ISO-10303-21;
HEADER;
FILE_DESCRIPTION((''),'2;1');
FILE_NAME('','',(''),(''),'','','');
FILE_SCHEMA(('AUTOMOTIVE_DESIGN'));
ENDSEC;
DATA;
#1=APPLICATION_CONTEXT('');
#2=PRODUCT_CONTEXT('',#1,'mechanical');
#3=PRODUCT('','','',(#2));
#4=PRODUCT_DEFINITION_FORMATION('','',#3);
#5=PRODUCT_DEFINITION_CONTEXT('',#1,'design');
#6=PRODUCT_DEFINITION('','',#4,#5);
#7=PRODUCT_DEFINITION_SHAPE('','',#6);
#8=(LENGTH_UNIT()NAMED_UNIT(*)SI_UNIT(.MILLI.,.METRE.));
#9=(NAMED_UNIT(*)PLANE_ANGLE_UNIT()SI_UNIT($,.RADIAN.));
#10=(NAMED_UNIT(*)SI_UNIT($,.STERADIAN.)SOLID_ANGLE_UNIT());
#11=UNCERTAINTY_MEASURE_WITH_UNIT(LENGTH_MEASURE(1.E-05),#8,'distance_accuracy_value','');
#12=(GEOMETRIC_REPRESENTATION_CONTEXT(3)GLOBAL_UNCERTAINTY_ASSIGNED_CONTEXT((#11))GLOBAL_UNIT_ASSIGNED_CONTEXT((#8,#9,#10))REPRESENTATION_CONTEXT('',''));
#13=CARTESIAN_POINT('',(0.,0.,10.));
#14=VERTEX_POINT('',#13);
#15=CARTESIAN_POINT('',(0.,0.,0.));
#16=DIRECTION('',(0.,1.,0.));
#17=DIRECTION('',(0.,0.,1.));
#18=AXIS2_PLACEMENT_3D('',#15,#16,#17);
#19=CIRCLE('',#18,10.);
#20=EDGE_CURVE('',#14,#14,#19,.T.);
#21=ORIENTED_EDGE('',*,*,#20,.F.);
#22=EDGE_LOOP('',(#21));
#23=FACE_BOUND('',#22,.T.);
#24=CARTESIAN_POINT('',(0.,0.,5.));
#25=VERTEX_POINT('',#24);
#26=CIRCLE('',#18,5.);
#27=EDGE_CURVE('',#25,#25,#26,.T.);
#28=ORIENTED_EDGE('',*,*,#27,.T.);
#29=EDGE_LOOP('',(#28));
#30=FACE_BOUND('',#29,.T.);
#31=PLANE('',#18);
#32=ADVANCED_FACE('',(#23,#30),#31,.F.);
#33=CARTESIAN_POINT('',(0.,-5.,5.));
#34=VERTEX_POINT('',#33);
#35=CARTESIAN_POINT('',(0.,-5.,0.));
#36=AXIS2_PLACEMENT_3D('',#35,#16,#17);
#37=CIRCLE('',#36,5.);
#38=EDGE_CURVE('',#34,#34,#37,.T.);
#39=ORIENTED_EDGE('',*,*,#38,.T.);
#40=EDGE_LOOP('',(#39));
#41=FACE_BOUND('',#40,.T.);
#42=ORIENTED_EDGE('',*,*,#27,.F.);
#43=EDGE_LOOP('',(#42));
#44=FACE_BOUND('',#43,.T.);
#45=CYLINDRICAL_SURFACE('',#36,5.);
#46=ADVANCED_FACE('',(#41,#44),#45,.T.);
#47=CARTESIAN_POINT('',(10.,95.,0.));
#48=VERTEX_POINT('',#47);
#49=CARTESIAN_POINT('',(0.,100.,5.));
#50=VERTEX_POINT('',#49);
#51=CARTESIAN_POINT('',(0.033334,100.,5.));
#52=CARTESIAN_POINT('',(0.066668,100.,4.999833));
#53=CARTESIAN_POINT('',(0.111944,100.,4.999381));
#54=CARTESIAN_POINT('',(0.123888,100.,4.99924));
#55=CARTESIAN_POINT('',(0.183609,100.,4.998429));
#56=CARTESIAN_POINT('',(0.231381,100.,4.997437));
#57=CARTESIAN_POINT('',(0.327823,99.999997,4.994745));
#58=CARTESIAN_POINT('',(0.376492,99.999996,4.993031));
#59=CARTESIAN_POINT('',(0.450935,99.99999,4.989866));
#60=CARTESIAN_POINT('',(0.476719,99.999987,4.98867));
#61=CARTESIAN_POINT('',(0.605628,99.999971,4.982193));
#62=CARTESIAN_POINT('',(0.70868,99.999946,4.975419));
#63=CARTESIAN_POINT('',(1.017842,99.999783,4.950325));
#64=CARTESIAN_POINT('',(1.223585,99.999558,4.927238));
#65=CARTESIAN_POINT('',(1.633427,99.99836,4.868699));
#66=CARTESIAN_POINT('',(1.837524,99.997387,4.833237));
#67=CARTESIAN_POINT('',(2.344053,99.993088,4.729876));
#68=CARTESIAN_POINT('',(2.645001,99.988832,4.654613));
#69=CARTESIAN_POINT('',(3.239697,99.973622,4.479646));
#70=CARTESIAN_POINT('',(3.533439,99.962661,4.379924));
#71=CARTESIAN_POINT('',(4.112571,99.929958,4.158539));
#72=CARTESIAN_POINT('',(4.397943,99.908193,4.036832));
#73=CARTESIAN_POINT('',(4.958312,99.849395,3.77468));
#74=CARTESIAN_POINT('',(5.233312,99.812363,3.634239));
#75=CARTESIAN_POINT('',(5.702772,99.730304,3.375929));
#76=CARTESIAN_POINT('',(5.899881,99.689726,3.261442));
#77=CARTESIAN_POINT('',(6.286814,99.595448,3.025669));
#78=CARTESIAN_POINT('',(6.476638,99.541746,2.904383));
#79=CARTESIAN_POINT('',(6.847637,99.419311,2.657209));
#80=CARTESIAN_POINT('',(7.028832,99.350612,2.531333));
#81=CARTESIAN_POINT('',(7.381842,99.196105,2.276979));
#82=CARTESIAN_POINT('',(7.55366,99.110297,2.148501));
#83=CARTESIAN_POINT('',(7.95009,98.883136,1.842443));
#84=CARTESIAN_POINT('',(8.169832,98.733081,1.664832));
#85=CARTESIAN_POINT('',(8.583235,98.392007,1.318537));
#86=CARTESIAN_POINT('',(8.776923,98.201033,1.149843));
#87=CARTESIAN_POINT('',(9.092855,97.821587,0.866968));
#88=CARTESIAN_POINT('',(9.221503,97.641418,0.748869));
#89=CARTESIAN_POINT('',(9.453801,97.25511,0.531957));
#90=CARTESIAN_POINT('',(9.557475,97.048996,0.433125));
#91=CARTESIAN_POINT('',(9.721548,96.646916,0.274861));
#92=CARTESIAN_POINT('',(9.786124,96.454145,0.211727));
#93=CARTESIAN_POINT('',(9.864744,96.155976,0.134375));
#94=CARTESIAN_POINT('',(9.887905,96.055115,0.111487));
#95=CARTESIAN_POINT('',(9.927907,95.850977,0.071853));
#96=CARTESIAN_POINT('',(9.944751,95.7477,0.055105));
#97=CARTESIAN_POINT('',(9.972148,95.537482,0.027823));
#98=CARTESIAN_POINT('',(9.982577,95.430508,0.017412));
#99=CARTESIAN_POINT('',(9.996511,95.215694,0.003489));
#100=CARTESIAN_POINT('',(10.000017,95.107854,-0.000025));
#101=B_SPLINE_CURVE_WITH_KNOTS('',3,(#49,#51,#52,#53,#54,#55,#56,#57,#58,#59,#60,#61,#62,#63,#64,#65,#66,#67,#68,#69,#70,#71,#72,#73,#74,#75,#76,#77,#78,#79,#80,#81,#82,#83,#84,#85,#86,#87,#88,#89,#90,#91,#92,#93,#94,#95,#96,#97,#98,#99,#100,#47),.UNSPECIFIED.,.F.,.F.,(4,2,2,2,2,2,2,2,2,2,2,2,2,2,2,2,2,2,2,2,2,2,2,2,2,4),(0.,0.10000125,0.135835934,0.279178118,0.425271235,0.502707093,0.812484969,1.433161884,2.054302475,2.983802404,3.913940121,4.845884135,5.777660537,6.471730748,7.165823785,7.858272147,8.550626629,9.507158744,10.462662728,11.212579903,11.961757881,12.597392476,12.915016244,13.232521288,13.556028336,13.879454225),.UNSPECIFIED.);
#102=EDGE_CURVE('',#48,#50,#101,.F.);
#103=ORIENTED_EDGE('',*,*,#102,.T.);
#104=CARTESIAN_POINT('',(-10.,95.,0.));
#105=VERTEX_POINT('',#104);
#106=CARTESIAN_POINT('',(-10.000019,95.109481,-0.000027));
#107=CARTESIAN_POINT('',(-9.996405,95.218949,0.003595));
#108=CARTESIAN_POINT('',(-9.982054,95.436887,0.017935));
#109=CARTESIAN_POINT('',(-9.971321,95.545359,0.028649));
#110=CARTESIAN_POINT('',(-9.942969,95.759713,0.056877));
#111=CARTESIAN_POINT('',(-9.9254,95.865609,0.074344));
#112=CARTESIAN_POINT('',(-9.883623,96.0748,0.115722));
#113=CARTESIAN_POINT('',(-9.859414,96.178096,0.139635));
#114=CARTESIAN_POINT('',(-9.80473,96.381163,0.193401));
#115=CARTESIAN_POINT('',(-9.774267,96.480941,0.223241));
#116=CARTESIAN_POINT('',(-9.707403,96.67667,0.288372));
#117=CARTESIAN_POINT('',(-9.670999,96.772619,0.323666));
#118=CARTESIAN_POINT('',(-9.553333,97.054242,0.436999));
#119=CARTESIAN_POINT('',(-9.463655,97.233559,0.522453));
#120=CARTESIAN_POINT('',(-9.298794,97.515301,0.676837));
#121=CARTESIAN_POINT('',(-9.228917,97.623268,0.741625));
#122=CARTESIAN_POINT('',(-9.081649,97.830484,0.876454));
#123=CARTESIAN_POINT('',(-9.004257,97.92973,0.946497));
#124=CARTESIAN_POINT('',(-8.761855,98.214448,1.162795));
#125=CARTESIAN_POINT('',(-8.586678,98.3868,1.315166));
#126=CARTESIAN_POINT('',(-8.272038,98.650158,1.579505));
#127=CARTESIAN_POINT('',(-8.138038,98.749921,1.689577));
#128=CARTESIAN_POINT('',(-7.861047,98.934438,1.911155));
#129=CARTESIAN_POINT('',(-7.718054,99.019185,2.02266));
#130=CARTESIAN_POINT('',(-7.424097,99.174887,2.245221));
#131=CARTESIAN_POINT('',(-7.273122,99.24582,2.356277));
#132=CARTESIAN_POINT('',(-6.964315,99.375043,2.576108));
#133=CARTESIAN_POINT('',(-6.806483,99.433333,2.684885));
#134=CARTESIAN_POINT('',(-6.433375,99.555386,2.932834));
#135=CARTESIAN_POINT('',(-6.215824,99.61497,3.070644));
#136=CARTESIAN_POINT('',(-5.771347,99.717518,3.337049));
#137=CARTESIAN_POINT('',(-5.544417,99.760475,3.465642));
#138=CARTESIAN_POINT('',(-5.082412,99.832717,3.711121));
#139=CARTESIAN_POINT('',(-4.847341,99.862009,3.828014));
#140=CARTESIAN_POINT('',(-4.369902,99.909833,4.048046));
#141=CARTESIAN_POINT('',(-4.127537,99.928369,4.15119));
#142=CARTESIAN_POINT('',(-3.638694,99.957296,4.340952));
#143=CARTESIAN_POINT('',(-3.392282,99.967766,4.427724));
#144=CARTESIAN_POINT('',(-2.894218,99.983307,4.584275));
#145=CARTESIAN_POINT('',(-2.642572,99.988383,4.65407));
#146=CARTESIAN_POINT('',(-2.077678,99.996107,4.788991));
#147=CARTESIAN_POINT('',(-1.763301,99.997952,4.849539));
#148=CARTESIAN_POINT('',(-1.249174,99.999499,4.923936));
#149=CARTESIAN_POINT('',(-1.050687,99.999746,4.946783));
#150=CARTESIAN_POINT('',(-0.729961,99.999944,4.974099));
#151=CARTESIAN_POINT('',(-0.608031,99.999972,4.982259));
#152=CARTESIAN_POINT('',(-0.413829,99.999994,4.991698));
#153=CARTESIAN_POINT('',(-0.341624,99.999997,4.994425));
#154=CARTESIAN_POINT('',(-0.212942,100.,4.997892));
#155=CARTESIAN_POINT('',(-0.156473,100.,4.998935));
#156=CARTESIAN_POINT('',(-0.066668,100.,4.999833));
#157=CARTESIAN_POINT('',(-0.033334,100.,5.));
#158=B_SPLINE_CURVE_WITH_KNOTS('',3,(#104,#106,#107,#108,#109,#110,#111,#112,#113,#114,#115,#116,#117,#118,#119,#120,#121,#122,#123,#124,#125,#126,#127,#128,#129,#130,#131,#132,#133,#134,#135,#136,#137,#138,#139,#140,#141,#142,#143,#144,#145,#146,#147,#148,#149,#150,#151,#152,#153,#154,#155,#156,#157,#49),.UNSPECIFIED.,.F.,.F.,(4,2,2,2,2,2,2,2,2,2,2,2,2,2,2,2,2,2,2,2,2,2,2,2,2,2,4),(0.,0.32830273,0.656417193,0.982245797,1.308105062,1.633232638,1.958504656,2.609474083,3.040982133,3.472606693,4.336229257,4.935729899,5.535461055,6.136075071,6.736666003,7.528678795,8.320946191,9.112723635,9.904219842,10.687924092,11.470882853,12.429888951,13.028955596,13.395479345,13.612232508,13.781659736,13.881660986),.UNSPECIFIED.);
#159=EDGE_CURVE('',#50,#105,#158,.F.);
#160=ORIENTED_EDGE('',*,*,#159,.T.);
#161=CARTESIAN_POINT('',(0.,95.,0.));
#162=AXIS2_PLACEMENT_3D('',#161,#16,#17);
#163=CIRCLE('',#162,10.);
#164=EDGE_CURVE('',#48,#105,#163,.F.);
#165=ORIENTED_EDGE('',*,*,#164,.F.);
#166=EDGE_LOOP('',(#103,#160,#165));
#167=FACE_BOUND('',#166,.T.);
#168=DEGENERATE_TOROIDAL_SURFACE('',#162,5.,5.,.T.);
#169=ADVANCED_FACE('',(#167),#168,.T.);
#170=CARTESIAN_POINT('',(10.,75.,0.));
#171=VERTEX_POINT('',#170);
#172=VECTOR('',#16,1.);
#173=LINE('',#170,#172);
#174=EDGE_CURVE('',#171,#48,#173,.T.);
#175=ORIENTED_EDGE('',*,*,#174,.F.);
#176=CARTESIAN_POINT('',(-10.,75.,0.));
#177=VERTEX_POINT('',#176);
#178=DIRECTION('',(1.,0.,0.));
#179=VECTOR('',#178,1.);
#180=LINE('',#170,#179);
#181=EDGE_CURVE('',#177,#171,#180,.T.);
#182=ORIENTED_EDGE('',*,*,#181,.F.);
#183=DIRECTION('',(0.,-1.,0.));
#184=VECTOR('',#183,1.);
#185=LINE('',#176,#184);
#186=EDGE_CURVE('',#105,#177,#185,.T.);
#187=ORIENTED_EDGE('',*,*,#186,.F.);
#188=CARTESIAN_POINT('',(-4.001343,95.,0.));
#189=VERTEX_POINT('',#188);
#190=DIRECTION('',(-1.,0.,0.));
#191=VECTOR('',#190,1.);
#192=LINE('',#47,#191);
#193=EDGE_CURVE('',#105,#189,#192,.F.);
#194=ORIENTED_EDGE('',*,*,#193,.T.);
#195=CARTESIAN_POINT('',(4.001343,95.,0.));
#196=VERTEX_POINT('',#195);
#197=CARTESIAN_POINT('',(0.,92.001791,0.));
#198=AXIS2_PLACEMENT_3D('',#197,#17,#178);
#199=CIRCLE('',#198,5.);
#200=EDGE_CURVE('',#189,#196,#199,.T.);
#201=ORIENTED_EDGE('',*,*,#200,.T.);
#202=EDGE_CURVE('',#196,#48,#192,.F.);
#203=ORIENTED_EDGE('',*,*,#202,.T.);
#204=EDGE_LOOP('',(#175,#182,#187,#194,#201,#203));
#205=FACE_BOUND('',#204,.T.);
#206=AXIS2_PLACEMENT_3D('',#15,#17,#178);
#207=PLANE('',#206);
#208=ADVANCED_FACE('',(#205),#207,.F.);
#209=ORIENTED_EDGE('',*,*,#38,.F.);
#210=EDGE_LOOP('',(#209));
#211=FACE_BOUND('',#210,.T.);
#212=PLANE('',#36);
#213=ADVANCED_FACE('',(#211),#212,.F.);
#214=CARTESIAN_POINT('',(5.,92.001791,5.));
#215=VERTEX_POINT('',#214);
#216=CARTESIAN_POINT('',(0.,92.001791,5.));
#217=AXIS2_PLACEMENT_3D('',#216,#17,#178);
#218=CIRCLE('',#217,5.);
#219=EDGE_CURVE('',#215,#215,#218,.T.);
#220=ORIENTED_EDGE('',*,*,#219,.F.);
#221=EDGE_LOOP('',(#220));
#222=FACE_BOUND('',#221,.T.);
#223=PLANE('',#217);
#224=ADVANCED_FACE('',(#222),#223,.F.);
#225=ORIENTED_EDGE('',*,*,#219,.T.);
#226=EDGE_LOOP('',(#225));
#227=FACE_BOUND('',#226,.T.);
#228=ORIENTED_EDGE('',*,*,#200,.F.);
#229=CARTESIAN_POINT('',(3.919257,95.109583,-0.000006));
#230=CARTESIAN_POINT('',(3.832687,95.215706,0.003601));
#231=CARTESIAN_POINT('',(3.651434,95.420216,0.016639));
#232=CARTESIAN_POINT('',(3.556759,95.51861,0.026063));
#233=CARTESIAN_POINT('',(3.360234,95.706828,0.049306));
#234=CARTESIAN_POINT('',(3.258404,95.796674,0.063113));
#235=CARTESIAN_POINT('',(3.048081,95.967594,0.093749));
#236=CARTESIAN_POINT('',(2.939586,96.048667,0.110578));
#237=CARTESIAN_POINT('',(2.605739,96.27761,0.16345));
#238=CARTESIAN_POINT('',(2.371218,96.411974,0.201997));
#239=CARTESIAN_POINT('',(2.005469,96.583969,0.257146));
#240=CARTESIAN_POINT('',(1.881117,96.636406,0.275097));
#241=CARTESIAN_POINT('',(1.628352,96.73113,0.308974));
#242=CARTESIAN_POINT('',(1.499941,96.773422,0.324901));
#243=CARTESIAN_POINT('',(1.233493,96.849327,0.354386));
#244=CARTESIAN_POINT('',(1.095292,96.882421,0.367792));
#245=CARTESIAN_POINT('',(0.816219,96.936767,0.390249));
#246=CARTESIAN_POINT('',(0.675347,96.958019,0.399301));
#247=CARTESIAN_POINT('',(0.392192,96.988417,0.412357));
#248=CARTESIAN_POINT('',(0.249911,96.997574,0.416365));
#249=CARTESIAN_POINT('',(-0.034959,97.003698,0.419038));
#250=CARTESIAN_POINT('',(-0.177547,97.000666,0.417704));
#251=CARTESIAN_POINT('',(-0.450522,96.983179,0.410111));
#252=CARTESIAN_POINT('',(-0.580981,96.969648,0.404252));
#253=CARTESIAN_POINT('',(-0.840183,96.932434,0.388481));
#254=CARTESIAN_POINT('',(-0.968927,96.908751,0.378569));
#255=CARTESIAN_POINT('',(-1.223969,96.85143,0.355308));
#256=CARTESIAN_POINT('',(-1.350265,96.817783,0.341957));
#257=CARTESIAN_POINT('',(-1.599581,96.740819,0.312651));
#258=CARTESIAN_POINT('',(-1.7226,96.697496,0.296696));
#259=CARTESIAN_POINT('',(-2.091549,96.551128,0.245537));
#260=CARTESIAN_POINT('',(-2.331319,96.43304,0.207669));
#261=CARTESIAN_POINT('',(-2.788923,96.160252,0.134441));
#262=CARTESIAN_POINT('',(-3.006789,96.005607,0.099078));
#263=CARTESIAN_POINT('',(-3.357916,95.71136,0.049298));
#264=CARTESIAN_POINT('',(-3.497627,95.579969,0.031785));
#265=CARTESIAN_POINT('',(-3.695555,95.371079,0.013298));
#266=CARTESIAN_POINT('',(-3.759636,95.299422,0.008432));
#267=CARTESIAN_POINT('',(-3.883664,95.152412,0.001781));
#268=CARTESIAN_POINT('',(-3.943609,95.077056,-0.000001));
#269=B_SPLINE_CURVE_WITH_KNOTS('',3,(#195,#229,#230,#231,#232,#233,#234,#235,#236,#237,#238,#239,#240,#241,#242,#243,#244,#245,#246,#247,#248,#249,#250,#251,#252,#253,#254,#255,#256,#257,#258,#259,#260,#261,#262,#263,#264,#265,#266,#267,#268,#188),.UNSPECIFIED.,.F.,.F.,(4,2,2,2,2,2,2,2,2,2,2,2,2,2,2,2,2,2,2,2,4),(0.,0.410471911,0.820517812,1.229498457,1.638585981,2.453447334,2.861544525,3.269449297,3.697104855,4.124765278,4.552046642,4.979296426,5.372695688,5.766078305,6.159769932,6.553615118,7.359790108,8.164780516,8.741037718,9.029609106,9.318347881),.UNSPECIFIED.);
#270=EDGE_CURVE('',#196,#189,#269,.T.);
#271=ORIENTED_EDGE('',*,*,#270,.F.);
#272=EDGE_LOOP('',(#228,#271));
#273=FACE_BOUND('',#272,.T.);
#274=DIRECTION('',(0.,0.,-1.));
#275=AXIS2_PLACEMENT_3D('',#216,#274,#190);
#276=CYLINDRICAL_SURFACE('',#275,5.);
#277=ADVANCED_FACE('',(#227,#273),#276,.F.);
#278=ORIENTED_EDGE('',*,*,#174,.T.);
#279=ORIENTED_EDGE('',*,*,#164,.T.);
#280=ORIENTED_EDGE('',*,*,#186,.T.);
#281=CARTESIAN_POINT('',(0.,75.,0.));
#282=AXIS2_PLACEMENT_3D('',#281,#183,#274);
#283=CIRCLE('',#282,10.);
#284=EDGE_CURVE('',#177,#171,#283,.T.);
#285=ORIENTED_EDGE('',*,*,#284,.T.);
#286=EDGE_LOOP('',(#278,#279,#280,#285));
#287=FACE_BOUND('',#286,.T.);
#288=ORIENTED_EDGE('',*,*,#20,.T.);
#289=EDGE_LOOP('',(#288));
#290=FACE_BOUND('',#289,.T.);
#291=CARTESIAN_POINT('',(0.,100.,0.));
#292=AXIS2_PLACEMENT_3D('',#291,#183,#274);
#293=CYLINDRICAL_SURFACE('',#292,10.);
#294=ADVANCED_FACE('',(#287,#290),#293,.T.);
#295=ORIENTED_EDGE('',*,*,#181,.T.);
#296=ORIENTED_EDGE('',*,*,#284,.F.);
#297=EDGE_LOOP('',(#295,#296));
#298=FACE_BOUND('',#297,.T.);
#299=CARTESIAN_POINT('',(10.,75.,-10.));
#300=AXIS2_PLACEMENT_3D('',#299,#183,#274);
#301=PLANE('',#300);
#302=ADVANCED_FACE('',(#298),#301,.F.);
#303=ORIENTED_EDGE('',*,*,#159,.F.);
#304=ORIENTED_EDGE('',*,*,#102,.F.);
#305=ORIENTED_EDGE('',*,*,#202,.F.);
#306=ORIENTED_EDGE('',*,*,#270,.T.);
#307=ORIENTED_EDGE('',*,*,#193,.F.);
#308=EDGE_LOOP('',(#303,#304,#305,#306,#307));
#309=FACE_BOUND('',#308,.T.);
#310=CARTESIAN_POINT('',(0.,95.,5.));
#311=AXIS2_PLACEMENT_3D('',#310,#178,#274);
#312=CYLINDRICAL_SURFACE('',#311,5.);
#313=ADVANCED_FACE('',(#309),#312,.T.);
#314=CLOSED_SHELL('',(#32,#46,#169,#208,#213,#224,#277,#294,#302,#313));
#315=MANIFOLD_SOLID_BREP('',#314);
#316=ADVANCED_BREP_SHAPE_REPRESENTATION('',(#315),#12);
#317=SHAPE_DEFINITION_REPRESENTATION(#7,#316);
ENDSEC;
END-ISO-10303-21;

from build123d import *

# Parameters (mm, degrees)
SKETCH1_R           = 10
BOSS_EXTRUDE1_DEPTH = 100
SKETCH4_W           = 20
SKETCH4_H           = 25
CUT_EXTRUDE2_DEPTH  = 10
FILLET3_R           = 5
SKETCH3_R           = 5
BOSS_EXTRUDE3_DEPTH = 5
SKETCH7_R           = 5
CUT_EXTRUDE3_DEPTH  = 5


with BuildPart() as part:
    # Sketch1 → Boss-Extrude1 (new body)
    with BuildSketch(Plane(origin=(0, 0, 0), x_dir=(1, 0, 0), z_dir=(0, 1, 0))):
        with Locations(Location((0, 0, 0), (0, 0, 90))):
            Circle(SKETCH1_R)
    extrude(amount=BOSS_EXTRUDE1_DEPTH)

    # Sketch4 → Cut-Extrude2 (cut)
    with BuildSketch(Plane.XY):
        with Locations((0, 87.5)):
            Rectangle(SKETCH4_W, SKETCH4_H)
    extrude(amount=-CUT_EXTRUDE2_DEPTH, mode=Mode.SUBTRACT)

    # Fillet3
    fillet3_edges = [part.edges().sort_by_distance(p)[0] for p in [
        (0, 100, 0),
        (0, 100, 10),
    ]]
    fillet(fillet3_edges, radius=FILLET3_R - 0.0001)  # a hair under: the kernel refuses the full size

    # Sketch3 → Boss-Extrude3 (add)
    with BuildSketch(Plane(origin=(0, 0, 0), x_dir=(1, 0, 0), z_dir=(0, 1, 0))):
        with Locations(Location((0, 0, 0), (0, 0, 270))):
            Circle(SKETCH3_R)
    extrude(amount=-BOSS_EXTRUDE3_DEPTH)

    # Sketch7 → Cut-Extrude3 (cut)
    with BuildSketch(Plane.XY):
        with Locations(Location((0, 92.001790993, 0), (0, 0, 143.155752141))):
            Circle(SKETCH7_R)
    extrude(amount=CUT_EXTRUDE3_DEPTH, mode=Mode.SUBTRACT)


solid = part.part
